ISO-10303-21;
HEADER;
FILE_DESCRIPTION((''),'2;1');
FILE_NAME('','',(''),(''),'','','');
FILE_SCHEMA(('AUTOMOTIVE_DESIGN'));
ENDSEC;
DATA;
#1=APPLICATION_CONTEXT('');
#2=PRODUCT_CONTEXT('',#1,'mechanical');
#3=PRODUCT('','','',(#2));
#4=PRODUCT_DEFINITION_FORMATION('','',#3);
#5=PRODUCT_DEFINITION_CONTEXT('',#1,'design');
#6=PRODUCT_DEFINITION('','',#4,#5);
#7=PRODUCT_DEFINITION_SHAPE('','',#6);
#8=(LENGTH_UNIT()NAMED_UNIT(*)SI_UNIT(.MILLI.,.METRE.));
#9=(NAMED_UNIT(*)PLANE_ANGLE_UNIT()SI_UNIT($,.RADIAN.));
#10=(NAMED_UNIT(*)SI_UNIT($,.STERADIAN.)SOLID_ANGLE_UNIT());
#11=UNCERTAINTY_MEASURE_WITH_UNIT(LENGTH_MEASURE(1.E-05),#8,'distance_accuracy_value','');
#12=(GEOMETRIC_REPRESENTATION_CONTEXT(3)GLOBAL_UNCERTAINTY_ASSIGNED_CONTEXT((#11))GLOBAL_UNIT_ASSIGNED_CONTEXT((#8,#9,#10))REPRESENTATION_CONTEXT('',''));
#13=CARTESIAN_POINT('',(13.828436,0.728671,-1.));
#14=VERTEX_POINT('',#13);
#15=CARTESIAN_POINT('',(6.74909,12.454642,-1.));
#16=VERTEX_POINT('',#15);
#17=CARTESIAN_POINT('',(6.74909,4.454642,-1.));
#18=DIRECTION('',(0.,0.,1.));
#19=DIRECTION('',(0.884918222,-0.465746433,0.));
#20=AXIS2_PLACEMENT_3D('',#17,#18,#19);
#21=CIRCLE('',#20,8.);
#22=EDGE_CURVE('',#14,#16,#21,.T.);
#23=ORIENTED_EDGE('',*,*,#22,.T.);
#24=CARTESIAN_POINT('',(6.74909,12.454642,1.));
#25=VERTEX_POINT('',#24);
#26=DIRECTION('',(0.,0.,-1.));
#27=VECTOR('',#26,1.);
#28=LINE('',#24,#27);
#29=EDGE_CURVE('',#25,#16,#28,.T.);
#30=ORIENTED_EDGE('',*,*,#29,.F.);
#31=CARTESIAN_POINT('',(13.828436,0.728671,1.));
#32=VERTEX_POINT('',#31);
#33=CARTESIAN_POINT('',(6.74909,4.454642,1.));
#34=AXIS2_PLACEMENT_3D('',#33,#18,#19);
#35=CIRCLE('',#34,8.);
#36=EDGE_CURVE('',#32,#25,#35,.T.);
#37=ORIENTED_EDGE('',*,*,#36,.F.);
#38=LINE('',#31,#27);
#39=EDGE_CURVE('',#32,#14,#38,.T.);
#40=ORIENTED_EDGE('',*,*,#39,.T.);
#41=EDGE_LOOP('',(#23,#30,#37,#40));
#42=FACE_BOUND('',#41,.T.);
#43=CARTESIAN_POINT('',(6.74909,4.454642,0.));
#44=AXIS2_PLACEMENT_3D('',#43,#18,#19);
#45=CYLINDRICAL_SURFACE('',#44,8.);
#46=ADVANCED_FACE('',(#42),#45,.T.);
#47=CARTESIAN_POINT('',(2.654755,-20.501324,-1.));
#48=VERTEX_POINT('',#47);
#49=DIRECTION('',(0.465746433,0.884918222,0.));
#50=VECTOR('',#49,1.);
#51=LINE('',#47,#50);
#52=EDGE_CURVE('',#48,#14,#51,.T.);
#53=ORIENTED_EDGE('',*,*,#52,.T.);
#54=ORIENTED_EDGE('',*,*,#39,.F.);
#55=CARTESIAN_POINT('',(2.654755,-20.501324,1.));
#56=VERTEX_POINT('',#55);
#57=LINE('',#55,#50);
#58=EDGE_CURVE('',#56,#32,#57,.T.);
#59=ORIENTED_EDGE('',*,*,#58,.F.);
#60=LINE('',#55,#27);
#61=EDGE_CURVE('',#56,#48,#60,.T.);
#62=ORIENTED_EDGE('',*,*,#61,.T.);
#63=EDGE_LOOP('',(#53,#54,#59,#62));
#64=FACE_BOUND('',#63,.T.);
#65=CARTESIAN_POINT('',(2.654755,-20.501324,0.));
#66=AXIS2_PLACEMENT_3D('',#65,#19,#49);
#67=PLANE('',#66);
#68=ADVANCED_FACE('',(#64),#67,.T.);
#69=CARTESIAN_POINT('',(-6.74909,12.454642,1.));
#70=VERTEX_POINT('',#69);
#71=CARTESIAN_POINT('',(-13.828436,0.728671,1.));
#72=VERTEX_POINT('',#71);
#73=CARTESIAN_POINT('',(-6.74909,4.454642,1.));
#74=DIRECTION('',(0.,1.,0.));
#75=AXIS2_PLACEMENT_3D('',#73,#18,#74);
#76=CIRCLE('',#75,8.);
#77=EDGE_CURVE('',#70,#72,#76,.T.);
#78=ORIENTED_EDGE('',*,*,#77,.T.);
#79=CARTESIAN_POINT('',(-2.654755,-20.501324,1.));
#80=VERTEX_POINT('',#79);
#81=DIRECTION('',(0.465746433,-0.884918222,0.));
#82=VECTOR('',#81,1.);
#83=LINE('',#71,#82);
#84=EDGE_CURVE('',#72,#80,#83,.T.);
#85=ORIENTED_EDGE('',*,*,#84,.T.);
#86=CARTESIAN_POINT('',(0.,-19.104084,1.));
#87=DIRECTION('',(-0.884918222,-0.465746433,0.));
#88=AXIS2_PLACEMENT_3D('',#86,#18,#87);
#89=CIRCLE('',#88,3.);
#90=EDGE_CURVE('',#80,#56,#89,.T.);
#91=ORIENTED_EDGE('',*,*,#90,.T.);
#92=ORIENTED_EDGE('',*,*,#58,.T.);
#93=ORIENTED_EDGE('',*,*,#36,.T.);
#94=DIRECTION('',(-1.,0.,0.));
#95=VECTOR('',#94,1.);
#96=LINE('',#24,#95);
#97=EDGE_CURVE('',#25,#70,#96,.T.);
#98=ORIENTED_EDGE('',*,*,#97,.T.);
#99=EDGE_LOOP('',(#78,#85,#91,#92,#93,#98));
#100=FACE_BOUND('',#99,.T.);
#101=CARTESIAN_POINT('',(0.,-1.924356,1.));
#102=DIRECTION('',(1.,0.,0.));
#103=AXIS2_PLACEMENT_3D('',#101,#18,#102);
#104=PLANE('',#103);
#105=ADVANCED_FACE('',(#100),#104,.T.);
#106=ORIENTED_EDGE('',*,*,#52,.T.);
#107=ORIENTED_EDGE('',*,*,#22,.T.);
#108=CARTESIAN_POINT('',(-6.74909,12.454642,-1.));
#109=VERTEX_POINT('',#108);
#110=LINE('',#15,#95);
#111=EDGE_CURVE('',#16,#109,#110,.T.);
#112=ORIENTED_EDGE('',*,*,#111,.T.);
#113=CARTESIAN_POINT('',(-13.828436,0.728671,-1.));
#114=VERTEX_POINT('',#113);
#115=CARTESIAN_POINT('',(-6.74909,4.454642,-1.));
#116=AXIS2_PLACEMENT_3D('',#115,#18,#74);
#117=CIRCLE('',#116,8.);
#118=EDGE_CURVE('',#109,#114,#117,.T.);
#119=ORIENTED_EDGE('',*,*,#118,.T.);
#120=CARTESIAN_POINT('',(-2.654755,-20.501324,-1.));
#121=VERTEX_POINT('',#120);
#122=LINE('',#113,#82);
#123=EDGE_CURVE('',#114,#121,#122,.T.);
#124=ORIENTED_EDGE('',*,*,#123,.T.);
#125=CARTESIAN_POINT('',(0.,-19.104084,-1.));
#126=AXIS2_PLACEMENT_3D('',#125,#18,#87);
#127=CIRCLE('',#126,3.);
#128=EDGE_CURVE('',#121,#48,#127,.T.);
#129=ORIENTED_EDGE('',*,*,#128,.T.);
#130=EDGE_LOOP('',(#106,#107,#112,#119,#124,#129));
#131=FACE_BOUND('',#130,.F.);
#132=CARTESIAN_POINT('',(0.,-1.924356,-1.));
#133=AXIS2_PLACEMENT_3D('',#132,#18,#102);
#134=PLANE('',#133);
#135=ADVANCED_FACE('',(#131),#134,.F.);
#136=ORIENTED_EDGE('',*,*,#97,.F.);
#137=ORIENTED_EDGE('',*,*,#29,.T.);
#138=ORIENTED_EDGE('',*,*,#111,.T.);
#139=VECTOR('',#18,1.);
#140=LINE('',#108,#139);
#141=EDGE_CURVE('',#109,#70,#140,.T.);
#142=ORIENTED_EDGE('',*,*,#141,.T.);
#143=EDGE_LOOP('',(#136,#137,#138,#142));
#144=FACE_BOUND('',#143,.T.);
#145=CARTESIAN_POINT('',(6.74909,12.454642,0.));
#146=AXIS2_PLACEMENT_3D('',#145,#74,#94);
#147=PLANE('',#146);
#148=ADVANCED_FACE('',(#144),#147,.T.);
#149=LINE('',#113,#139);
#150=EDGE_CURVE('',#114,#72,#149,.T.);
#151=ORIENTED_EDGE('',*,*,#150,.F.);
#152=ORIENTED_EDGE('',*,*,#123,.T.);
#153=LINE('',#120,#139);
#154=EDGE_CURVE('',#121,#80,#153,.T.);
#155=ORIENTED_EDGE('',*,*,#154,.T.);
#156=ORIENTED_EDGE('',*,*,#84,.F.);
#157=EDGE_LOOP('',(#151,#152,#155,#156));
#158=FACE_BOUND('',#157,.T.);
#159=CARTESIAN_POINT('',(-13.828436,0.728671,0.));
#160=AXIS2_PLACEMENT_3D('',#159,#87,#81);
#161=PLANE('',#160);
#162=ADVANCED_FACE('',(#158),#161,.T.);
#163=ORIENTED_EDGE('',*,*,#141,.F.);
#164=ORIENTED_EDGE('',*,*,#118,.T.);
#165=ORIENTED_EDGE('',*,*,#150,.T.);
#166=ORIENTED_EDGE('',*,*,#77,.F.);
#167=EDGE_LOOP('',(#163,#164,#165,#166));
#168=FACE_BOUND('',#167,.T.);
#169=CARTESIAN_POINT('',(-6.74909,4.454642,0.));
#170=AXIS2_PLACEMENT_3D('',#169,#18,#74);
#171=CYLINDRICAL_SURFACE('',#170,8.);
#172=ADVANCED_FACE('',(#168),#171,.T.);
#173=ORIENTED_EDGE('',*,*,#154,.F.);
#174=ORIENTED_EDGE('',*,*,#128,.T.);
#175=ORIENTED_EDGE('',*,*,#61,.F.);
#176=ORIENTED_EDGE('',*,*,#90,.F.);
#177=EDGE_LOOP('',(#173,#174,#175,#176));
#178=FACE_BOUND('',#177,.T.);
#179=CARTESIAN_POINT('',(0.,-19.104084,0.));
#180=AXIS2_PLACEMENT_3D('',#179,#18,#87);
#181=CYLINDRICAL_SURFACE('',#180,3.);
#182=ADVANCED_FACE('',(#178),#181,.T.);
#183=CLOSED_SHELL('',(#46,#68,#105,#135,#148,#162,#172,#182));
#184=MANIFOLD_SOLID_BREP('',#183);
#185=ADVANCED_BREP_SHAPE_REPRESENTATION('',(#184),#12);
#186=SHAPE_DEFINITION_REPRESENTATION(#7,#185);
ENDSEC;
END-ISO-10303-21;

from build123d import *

# Parameters (mm, degrees)
F1_DEPTH = 1


# Not quite as in the source:
# - a feature of the source that left no trace in its solid (it failed there, or was rolled back) is left out


with BuildPart() as f1:
    # F0 (on Top) → F1 (new body, symmetric)
    with BuildSketch(Plane.XY):
        with BuildLine():
            Line((6.7490902932, 12.4546424842), (-6.7490902932, 12.4546424842))
            ThreePointArc((-6.7490902932, 12.4546424842), (-13.5977314614, 8.5893872344), (-13.8284360723, 0.7286710215))
            Line((-13.8284360723, 0.7286710215), (-2.6547546671, -20.5013236482))
            ThreePointArc((-2.6547546671, -20.5013236482), (0, -22.1040843497), (2.6547546671, -20.5013236482))
            Line((2.6547546671, -20.5013236482), (13.8284360723, 0.7286710215))
            ThreePointArc((13.8284360723, 0.7286710215), (13.5977314614, 8.5893872344), (6.7490902932, 12.4546424842))
        make_face()
    extrude(amount=F1_DEPTH, both=True)


solid = f1.part
